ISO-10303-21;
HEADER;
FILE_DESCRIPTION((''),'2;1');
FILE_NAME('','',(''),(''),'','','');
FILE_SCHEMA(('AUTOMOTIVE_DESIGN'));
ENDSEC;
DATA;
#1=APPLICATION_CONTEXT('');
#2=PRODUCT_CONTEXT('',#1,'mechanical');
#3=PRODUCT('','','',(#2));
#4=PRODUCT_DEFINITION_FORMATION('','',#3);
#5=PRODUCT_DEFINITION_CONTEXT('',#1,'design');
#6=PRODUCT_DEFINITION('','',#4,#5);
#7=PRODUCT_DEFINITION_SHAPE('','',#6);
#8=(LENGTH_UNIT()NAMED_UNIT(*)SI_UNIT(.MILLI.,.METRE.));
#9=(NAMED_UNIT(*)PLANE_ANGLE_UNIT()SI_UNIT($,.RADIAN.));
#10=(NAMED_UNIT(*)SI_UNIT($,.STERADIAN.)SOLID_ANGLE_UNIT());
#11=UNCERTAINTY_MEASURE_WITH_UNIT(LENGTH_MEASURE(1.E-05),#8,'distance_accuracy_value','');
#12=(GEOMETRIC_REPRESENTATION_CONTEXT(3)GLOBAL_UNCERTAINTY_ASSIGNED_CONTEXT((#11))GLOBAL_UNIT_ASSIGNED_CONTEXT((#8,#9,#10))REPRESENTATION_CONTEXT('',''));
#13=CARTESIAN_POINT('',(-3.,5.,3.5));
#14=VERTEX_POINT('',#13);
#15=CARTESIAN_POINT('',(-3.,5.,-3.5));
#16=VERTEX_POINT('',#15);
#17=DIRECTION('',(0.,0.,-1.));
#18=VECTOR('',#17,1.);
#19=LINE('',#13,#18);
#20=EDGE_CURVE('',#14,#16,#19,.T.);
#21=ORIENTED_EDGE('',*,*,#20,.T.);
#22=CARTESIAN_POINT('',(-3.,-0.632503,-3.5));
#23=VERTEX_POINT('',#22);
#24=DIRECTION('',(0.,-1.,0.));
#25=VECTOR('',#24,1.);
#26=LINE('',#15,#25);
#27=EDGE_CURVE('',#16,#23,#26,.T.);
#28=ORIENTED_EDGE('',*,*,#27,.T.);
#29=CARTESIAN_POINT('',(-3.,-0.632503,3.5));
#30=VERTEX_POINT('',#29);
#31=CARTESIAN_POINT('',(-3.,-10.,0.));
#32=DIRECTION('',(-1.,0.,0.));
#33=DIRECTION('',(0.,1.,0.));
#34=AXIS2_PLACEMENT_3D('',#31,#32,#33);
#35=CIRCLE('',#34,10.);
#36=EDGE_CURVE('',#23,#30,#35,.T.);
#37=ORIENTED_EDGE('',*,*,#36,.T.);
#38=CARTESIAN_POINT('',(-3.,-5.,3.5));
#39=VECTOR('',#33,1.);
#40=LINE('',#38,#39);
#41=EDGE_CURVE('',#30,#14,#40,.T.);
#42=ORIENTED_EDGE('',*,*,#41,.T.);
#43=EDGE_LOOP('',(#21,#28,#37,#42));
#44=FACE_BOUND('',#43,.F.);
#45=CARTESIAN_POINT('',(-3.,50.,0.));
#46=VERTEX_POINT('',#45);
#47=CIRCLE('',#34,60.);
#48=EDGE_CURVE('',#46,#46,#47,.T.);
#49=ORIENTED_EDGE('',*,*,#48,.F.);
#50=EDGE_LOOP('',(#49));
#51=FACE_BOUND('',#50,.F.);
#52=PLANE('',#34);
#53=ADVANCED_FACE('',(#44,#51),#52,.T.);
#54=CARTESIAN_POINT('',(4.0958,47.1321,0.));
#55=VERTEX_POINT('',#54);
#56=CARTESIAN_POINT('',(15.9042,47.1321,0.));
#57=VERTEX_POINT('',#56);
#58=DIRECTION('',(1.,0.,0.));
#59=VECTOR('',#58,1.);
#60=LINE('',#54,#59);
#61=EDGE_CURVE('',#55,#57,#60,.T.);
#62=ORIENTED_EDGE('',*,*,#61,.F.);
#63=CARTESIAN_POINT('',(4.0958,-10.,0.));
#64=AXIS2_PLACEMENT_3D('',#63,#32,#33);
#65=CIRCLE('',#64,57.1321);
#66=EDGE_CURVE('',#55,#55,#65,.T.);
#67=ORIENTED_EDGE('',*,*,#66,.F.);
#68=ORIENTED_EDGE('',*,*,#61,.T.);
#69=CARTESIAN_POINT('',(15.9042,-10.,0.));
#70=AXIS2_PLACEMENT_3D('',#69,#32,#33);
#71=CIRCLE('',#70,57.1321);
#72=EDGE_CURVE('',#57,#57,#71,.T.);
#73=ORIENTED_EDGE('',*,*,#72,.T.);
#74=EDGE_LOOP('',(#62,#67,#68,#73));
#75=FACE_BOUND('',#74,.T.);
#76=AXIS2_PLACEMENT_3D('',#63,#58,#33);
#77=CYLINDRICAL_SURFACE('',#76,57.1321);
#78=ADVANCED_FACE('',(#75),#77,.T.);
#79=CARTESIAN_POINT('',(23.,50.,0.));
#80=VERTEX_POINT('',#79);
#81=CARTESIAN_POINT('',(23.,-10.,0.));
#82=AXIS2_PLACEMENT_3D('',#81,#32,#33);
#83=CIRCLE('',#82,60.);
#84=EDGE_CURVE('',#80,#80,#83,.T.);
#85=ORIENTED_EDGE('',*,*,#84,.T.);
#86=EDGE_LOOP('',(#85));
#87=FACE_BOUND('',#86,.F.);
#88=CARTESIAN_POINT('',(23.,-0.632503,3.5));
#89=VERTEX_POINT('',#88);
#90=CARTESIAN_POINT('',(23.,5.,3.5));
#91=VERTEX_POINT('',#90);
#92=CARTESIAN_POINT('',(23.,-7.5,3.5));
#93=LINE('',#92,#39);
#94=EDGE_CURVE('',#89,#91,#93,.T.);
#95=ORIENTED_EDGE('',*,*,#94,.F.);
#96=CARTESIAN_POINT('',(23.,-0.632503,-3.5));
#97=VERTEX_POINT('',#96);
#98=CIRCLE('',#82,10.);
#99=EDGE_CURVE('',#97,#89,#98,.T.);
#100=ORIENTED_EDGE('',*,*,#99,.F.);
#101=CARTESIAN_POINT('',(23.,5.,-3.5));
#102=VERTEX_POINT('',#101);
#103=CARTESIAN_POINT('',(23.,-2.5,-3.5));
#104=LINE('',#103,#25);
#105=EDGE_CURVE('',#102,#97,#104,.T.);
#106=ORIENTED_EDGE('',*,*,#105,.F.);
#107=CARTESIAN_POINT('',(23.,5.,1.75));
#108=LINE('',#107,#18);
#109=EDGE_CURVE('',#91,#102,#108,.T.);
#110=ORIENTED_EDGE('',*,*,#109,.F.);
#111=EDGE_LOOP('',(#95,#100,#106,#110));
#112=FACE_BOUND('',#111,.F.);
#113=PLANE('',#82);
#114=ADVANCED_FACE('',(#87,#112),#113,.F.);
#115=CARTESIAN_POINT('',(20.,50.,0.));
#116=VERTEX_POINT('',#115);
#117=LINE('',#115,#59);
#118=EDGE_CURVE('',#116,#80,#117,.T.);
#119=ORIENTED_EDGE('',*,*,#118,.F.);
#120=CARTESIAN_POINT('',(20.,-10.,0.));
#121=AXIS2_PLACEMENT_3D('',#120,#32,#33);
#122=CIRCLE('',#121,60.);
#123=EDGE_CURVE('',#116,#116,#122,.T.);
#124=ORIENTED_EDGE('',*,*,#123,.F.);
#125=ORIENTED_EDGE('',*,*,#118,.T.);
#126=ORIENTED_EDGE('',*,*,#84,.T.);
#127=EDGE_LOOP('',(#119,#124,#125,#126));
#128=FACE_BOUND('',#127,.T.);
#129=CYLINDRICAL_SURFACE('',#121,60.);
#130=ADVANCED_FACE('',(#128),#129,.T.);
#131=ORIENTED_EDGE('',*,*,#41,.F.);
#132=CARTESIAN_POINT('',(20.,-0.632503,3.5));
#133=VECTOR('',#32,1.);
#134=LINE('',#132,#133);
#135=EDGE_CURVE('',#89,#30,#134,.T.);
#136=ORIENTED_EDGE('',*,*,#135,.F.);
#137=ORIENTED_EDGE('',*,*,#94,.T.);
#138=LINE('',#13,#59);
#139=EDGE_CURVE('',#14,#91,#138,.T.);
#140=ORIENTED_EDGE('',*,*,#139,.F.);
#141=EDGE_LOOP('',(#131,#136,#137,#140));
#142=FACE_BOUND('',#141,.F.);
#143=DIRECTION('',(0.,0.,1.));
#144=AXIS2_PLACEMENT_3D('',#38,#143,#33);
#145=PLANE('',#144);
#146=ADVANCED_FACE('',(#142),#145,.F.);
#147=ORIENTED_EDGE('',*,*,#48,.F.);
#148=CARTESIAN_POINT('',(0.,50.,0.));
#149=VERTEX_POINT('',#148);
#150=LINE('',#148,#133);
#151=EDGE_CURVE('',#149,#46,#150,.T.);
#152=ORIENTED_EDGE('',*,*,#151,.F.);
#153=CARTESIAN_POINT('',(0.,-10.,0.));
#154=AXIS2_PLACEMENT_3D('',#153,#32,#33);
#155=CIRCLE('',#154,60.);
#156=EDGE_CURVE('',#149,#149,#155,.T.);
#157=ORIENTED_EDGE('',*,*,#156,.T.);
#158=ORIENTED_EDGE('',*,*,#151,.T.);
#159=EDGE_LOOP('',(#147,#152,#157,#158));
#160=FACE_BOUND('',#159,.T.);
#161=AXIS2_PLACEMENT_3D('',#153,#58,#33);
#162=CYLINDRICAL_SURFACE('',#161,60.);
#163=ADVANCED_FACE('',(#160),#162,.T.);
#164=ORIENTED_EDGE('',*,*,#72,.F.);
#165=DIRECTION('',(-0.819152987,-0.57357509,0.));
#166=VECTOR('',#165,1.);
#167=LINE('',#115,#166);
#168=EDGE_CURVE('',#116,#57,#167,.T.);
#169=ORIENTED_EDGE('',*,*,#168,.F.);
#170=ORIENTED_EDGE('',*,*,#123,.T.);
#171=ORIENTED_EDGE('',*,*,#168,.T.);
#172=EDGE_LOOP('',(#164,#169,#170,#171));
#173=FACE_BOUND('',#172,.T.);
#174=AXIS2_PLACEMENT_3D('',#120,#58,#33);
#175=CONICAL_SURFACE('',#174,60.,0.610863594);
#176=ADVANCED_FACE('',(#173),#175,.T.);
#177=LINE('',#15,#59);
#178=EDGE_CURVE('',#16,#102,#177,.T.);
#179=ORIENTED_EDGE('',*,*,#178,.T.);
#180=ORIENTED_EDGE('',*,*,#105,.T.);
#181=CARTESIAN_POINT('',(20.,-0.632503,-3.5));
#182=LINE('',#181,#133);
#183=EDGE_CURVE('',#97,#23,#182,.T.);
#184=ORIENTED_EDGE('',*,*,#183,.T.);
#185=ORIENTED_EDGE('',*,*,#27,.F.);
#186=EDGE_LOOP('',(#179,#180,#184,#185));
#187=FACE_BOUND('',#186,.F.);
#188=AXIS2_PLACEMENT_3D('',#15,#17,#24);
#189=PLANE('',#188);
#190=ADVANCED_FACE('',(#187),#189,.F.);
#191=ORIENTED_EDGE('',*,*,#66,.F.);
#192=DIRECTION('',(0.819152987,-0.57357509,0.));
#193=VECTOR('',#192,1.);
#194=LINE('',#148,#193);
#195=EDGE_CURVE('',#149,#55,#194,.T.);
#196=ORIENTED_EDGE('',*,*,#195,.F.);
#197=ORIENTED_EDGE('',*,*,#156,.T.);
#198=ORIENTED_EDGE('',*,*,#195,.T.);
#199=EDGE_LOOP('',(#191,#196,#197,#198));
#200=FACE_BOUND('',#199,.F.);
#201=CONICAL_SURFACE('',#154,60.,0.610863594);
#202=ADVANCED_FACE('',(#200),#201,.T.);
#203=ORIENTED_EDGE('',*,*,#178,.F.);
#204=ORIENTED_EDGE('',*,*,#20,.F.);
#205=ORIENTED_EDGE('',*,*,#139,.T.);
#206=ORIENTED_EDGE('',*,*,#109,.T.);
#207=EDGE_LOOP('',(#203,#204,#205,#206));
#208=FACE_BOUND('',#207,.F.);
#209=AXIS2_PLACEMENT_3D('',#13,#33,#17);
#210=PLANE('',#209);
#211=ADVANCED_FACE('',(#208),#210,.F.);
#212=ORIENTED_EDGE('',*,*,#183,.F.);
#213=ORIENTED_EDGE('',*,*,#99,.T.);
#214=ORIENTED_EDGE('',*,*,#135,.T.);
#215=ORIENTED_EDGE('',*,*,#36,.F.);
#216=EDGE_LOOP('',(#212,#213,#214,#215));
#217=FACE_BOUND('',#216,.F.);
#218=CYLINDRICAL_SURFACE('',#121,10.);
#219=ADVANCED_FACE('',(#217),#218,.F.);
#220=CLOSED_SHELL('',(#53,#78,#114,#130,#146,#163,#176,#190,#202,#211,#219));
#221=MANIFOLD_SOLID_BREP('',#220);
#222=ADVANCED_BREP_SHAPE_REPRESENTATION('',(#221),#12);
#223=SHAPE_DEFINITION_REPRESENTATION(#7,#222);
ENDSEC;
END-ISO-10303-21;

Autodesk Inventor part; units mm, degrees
ref_plane "YZ Plane" through (0, 0, 0) normal (1, 0, 0) x (0, 1, 0)
ref_plane "XZ Plane" through (0, 0, 0) normal (0, 1, 0) x (-1, 0, 0)
ref_plane "XY Plane" through (0, 0, 0) normal (0, 0, 1) x (1, 0, 0)
sketch "Sketch1" plane through (0, 0, 0) normal (0, 0, 1) x (1, 0, 0)
  line L0 (0, 0) -> (0, 50)
  line L1 (20, 50) -> (20, 0)
  line L2 (20, 0) -> (0, 0)
  line L3 (0, -10) -> (-48.3632, -10)
  line L4 (0, 50) -> (4.0958, 47.1321)
  line L5 (20, 50) -> (15.9042, 47.1321)
  line L6 (4.0958, 47.1321) -> (15.9042, 47.1321)
  dimension "d3" = 10
revolve "Revolution1" add sketch "Sketch1" angle 360 about axis through (0, -10, 0) along (-1, 0, 0)
thicken "Thicken1" operation add thickness 3 both sides no extend neighbours no toward (-1, 0, 0) faces at (0, -50.5351, 14.7961)
thicken "Thicken2" operation add thickness 3 both sides no extend neighbours no toward (1, 0, 0) faces at (20, -50.5351, -14.7961)
sketch "Sketch2" plane through (-3, -10, 0) normal (-1, 0, 0) x (0, 0, 1)
  line L0 (-3.5, 5) -> (3.5, 5)
  line L1 (3.5, 5) -> (3.5, 15)
  line L2 (3.5, 15) -> (-3.5, 15)
  line L3 (-3.5, 15) -> (-3.5, 5)
  line L4 (-3.5, 5) -> (3.5, 15) construction
  line L5 (3.5, 5) -> (-3.5, 15) construction
  point P0 (0, 10)
  dimension "d11" = 7
  dimension "d12" = 10
extrude "Extrusion1" cut sketch "Sketch2" against normal through all
properties part number "POLEA"
